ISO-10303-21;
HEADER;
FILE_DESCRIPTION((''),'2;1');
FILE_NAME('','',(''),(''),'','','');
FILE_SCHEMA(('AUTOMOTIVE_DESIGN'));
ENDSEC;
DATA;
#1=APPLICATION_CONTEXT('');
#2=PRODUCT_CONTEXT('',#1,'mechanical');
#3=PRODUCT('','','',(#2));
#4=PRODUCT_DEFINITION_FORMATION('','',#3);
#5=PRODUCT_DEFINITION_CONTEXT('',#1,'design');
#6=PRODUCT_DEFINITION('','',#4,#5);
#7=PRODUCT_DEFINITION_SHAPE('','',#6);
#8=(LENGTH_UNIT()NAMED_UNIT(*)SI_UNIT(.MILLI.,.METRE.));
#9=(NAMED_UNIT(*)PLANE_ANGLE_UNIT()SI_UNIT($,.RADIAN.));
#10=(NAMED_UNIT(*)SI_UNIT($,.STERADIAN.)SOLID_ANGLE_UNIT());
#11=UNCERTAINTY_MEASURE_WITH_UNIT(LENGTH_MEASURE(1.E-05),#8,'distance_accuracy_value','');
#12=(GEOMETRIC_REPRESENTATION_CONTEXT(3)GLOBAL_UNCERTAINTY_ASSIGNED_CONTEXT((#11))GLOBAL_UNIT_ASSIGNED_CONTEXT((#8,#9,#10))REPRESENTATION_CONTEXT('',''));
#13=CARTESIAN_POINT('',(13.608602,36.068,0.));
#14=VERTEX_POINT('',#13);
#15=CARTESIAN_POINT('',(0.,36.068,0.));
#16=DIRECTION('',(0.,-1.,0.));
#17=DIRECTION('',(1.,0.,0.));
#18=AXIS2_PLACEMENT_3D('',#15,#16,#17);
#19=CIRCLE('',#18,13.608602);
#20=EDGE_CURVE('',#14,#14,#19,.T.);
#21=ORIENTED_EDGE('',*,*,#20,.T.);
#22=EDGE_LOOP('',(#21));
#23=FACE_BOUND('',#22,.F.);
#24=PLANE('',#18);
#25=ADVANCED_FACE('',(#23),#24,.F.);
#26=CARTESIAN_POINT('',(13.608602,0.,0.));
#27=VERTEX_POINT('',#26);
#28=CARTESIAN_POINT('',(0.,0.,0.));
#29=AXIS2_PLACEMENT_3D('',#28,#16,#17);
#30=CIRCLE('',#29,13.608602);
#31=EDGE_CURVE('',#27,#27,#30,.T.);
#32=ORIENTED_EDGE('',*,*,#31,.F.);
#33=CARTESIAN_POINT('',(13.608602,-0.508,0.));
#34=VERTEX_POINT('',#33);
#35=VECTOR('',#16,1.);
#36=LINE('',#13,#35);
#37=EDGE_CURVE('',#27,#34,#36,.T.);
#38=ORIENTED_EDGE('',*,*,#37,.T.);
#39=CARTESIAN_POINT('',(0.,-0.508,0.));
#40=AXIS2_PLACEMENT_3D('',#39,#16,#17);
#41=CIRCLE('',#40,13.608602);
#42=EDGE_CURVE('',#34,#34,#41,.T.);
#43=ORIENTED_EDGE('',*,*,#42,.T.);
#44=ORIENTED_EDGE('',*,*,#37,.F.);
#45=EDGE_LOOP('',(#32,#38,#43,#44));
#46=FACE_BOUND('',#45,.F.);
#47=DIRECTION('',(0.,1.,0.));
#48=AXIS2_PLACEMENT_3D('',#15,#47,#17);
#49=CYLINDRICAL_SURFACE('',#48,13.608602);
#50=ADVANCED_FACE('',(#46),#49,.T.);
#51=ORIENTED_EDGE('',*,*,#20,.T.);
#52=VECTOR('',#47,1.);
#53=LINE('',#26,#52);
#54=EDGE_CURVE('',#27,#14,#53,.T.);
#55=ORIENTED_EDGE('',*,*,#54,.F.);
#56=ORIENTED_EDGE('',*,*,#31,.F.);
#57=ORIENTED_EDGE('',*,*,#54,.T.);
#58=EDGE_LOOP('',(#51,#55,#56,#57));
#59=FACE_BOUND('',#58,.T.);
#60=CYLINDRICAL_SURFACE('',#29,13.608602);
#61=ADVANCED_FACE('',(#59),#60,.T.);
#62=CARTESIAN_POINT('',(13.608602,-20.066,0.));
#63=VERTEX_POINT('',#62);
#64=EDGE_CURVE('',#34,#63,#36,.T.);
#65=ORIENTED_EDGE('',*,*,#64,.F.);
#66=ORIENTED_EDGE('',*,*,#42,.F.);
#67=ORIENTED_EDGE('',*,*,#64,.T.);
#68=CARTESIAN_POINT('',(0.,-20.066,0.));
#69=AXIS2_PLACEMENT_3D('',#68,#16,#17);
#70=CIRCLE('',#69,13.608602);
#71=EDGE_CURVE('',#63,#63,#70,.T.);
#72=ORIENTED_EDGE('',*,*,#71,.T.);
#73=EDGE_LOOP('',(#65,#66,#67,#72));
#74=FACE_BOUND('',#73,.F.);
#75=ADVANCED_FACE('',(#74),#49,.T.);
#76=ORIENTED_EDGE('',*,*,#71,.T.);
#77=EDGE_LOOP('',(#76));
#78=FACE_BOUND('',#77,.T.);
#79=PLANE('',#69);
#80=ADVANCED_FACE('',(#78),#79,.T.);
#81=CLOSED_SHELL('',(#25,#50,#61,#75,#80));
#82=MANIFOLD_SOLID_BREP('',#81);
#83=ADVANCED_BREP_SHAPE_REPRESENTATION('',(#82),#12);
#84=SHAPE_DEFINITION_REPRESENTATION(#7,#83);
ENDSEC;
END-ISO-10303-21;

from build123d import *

# Parameters (mm, degrees)
F1_R     = 13.608601514
F2_DEPTH = 36.068
F4_DEPTH = 36.576
F5_DEPTH = 56.134


# Not quite as in the source:
# - the program builds the solid bodies; features that only make, move or delete a surface that nothing else refers to are left out


with BuildPart() as f2:
    # F1 (on Front) → F2 (new body)
    with BuildSketch(Plane.XZ):
        Circle(F1_R)
    extrude(amount=-F2_DEPTH)

    # F4 (add): a face of the model
    f4_faces = [f2.faces().sort_by_distance(p)[0] for p in [
        (0, 36.068, 0),
    ]]
    extrude(f4_faces, amount=-F4_DEPTH)

    # F5 (add): a face of the model
    f5_faces = [f2.faces().sort_by_distance(p)[0] for p in [
        (0, 36.068, 0),
    ]]
    extrude(f5_faces, amount=-F5_DEPTH)


solid = f2.part
